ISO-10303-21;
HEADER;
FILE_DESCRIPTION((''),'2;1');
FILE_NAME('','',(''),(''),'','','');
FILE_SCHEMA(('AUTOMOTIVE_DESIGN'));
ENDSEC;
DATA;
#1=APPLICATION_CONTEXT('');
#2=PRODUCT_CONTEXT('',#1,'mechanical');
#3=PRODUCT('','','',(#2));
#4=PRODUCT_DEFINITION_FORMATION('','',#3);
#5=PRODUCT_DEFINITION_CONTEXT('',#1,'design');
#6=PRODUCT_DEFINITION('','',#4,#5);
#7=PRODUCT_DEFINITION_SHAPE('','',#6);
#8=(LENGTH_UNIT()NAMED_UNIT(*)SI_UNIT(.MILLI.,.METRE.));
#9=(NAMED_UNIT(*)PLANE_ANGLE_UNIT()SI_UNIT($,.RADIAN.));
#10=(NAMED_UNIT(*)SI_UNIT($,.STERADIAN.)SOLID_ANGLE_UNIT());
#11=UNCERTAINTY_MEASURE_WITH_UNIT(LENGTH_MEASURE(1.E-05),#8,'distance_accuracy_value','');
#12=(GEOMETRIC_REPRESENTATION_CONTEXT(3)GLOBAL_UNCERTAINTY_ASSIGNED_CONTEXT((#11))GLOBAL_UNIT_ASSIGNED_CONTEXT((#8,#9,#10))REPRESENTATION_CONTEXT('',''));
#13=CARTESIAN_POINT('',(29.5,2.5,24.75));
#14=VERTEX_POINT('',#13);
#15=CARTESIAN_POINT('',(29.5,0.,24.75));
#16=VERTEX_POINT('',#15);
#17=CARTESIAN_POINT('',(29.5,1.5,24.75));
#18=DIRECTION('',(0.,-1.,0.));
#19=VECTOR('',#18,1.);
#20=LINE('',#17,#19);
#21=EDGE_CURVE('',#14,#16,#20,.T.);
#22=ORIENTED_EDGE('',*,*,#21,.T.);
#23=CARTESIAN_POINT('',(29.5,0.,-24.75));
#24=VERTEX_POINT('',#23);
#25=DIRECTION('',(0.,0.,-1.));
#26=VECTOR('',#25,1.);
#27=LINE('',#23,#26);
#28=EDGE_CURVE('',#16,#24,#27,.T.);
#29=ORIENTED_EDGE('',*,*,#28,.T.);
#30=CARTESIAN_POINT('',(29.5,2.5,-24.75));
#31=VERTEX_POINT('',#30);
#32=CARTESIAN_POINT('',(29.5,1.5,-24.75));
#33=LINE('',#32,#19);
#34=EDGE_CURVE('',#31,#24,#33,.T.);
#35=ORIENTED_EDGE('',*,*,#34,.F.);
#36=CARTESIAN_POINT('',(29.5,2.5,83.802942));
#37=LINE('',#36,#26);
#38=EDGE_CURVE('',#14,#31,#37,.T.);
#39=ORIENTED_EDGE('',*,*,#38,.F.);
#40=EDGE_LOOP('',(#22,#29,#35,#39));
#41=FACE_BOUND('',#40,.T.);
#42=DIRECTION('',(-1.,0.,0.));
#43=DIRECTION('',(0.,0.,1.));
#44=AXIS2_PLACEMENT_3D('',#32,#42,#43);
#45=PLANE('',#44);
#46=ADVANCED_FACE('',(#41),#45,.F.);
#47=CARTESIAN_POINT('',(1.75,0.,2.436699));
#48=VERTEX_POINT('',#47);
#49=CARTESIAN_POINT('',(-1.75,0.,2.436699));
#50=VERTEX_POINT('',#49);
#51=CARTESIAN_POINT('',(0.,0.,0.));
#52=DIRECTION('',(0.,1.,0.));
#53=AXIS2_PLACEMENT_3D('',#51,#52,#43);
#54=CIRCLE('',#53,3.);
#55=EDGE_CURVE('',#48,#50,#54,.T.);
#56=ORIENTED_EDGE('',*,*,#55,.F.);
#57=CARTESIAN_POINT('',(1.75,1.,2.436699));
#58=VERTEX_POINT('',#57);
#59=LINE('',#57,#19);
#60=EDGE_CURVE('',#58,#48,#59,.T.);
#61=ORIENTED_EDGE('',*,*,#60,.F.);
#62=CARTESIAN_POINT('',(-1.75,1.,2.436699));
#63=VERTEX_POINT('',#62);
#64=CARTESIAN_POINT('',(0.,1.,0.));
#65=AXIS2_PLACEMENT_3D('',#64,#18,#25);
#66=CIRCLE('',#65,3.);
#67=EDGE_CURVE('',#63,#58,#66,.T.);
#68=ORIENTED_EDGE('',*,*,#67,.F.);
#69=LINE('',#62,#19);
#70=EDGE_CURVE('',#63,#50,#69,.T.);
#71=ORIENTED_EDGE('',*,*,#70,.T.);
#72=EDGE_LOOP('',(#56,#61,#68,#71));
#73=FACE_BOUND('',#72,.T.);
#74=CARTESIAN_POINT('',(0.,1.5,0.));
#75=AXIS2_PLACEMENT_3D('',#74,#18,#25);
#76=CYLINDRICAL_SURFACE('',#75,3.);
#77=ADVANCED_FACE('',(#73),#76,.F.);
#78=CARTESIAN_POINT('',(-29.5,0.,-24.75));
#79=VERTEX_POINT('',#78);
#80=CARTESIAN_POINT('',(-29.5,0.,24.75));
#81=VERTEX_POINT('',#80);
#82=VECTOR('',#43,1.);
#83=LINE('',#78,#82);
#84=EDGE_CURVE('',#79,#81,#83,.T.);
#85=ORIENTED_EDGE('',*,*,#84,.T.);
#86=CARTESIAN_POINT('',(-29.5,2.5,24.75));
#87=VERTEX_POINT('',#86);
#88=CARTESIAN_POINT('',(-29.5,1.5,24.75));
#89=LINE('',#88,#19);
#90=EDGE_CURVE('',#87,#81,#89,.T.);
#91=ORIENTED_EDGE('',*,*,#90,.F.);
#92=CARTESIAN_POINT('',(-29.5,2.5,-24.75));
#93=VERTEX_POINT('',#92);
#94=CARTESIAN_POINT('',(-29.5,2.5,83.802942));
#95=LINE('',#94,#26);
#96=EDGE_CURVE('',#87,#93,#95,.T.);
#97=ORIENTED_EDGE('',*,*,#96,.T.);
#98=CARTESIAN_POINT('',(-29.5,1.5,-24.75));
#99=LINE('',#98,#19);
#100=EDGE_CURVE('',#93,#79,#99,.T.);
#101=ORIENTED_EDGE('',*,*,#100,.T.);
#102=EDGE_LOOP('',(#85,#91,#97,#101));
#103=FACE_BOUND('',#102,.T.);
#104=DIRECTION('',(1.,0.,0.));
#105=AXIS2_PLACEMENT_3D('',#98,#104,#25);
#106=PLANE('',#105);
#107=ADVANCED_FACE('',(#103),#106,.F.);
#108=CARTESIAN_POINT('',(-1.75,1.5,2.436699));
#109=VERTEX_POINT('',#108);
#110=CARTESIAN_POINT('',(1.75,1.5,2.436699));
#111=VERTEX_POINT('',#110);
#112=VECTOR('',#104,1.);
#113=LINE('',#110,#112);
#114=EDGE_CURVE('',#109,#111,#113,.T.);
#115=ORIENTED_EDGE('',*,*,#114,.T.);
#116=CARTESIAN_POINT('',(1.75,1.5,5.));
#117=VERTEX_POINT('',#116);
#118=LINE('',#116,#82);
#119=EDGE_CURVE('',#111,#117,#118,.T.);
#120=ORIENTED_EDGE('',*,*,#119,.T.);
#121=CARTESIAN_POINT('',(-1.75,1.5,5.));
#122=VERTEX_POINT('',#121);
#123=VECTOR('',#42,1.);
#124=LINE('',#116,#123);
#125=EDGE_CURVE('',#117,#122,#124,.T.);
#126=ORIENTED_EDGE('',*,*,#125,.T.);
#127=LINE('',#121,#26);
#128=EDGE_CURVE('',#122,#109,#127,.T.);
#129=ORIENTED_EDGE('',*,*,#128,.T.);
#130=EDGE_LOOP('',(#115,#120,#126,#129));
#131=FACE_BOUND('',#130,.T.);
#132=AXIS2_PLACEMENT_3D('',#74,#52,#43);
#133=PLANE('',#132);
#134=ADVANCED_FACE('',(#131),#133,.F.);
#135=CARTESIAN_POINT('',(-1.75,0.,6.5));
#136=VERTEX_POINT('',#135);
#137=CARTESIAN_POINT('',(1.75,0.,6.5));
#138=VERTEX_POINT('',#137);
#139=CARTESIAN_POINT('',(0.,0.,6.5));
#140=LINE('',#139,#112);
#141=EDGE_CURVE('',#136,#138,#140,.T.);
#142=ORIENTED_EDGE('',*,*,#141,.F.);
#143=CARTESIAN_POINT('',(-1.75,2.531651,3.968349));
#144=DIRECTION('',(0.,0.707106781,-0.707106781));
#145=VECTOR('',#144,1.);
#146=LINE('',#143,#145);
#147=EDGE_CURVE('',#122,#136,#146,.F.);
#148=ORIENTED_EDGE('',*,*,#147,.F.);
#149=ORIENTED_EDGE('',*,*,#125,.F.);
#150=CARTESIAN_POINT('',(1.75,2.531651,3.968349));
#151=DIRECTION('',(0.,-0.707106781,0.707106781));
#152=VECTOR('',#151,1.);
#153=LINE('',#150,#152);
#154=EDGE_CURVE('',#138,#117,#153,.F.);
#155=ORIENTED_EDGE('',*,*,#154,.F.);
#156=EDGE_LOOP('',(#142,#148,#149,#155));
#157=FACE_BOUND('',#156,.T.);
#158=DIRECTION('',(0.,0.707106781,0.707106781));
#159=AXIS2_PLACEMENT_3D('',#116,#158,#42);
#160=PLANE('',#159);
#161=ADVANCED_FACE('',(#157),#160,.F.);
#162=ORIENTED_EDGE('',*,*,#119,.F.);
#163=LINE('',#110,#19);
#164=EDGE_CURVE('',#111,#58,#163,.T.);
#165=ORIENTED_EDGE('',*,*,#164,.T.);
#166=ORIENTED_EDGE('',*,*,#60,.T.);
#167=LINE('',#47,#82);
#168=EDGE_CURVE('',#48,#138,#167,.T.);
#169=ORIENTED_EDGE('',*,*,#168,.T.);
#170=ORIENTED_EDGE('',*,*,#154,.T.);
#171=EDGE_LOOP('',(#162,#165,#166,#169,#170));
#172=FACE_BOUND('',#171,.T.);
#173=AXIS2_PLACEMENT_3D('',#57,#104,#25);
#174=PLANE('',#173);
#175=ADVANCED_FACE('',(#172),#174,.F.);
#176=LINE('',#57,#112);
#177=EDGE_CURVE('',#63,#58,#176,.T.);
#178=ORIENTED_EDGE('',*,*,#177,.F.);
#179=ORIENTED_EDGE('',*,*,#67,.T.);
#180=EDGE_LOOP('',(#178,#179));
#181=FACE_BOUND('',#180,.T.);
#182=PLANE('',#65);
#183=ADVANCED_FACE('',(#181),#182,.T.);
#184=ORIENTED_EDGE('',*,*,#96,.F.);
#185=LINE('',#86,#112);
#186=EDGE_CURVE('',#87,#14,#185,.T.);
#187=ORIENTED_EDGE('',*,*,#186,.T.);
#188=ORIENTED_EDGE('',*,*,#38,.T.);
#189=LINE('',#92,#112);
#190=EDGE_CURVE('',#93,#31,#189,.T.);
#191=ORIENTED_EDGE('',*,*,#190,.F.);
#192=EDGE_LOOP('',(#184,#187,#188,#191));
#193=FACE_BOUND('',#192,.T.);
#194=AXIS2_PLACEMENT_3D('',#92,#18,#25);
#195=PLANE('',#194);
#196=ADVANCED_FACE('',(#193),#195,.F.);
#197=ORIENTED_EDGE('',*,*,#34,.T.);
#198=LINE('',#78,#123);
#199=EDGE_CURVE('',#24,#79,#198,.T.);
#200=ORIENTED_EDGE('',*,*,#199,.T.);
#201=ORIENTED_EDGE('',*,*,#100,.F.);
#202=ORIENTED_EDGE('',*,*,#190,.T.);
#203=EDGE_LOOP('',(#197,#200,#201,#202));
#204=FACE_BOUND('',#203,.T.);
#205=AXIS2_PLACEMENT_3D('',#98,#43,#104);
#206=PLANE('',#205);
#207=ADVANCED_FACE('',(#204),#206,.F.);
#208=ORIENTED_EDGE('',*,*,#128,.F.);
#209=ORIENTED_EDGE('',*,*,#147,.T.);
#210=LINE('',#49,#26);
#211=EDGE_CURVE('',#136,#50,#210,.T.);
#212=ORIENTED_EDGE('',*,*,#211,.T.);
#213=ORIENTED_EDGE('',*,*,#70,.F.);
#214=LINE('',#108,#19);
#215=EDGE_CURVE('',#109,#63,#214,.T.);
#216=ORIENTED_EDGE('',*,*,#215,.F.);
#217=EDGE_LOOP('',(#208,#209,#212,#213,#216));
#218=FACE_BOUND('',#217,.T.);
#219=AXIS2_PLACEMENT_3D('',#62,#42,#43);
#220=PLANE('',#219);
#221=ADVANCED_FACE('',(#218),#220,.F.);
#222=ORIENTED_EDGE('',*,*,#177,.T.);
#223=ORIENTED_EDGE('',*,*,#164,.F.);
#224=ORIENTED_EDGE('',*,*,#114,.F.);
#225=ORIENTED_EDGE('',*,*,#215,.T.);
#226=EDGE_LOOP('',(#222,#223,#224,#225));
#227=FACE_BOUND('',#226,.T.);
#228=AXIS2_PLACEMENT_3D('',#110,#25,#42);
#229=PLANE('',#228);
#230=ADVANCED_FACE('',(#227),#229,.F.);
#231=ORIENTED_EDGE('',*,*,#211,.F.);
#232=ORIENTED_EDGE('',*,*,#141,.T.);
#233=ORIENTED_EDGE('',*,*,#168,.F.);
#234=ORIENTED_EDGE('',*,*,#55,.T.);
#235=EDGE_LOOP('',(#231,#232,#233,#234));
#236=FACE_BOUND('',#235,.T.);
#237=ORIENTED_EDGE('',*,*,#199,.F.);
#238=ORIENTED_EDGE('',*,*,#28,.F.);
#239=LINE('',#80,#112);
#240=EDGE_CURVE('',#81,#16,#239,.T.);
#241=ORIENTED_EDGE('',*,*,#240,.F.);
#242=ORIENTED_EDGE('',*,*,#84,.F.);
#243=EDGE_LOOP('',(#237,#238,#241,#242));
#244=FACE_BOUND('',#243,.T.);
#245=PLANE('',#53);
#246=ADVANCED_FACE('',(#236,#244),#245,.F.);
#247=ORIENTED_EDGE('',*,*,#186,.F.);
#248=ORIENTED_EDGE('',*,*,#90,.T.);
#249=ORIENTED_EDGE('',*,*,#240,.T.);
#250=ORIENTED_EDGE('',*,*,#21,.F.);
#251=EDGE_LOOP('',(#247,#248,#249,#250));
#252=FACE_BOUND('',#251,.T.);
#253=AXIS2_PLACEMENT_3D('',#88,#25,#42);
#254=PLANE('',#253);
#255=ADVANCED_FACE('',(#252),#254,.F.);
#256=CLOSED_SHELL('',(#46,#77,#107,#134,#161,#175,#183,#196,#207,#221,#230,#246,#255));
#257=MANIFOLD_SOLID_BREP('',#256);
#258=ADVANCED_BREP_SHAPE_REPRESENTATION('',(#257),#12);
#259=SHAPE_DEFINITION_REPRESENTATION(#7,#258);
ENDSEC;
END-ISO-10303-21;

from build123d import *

# Parameters (mm, degrees)
SKETCH1_W           = 59
SKETCH1_H           = 49.5
SKETCH1_R           = 3
BOSS_EXTRUDE1_DEPTH = 1.5
BOSS_EXTRUDE2_DEPTH = 49.5
CUT_EXTRUDE1_DEPTH  = 1
CUT_EXTRUDE3_DEPTH  = 65.105869466
BOSS_EXTRUDE3_START = 0.5
SKETCH5_R           = 3
BOSS_EXTRUDE3_DEPTH = 0.5
SKETCH6_W           = 3.5
SKETCH6_H           = 2.563301414
CUT_EXTRUDE4_DEPTH  = 0.5
CHAMFER3_SIZE       = 1.5
SKETCH7_W           = 59
SKETCH7_H           = 2.086537977
CUT_EXTRUDE5_DEPTH  = 58.762444547


with BuildPart() as part:
    # Sketch1 → Boss-Extrude1 (new body)
    with BuildSketch(Plane(origin=(0, 0, 0), x_dir=(1, 0, 0), z_dir=(0, 1, 0))):
        Rectangle(SKETCH1_W, SKETCH1_H)
        with Locations(Location((0, 0, 0), (0, 0, 270))):
            Circle(SKETCH1_R, mode=Mode.SUBTRACT)
    extrude(amount=BOSS_EXTRUDE1_DEPTH)

    # Sketch2 → Boss-Extrude2 (add)
    with BuildSketch(Plane(origin=(0, 0, -24.75), x_dir=(-1, 0, 0), z_dir=(0, 0, -1))):
        Polygon((-29.5, 1.5), (29.5, 1.5), (29.5, 2.5), (28.32, 4), (27.14, 2.5), (25.96, 4), (24.78, 2.5), (23.6, 4), (22.42, 2.5), (21.24, 4), (20.06, 2.5), (18.88, 4), (17.7, 2.5), (16.52, 4), (15.34, 2.5), (14.16, 4), (12.98, 2.5), (11.8, 4), (10.62, 2.5), (9.44, 4), (8.26, 2.5), (7.08, 4), (5.9, 2.5), (4.72, 4), (3.54, 2.5), (2.36, 4), (1.18, 2.5), (0, 4), (-1.18, 2.5), (-2.36, 4), (-3.54, 2.5), (-4.72, 4), (-5.9, 2.5), (-7.08, 4), (-8.26, 2.5), (-9.44, 4), (-10.62, 2.5), (-11.8, 4), (-12.98, 2.5), (-14.16, 4), (-15.34, 2.5), (-16.52, 4), (-17.7, 2.5), (-18.88, 4), (-20.06, 2.5), (-21.24, 4), (-22.42, 2.5), (-23.6, 4), (-24.78, 2.5), (-25.96, 4), (-27.14, 2.5), (-28.32, 4), (-29.5, 2.5), align=None)
    extrude(amount=-BOSS_EXTRUDE2_DEPTH)

    # Sketch3 → Cut-Extrude1 (cut)
    with BuildSketch(Plane(origin=(0, 0, 0), x_dir=(-1, 0, 0), z_dir=(0, -1, 0))):
        with BuildLine():
            Line((-1.75, -2.436698586), (-1.75, -5))
            Line((-1.75, -5), (1.75, -5))
            Line((1.75, -5), (1.75, -2.436698586))
            ThreePointArc((1.75, -2.436698586), (0, 3), (-1.75, -2.436698586))
        make_face()
    extrude(amount=-CUT_EXTRUDE1_DEPTH, mode=Mode.SUBTRACT)

    # Sketch4 → Cut-Extrude3 (cut, through all)
    with BuildSketch(Plane(origin=(29.5, 0, 0), x_dir=(0, 0, -1), z_dir=(1, 0, 0))):
        with BuildLine():
            Line((-24, 4), (-24.75, 4))
            Line((-24.75, 4), (-24.75, 3.25))
            ThreePointArc((-24.75, 3.25), (-24.530330086, 3.780330086), (-24, 4))
        make_face()
    cut_extrude3 = extrude(amount=-CUT_EXTRUDE3_DEPTH, mode=Mode.SUBTRACT)

    # Mirror1: Cut-Extrude3 across plane
    add(cut_extrude3.mirror(Plane.XY), mode=Mode.SUBTRACT)

    # Sketch5 → Boss-Extrude3 (add)
    with BuildSketch(Plane.XZ.offset(-1.5).offset(BOSS_EXTRUDE3_START)):
        Circle(SKETCH5_R)
    extrude(amount=-BOSS_EXTRUDE3_DEPTH)

    # Sketch6 → Cut-Extrude4 (cut)
    with BuildSketch(Plane.XZ.offset(-1)):
        with Locations((0, 3.718349293)):
            Rectangle(SKETCH6_W, SKETCH6_H)
    extrude(amount=-CUT_EXTRUDE4_DEPTH, mode=Mode.SUBTRACT)

    # Chamfer3
    chamfer3_edges = [part.edges().sort_by_distance(p)[0] for p in [
        (0, 0, 5),
    ]]
    chamfer(chamfer3_edges, length=CHAMFER3_SIZE - 0.0001)  # a hair under: the kernel refuses the full size

    # Sketch7 → Cut-Extrude5 (cut, through all)
    with BuildSketch(Plane.XY.offset(24.75)):
        with Locations((0, 3.543268988)):
            Rectangle(SKETCH7_W, SKETCH7_H)
    extrude(amount=-CUT_EXTRUDE5_DEPTH, mode=Mode.SUBTRACT)


solid = part.part
